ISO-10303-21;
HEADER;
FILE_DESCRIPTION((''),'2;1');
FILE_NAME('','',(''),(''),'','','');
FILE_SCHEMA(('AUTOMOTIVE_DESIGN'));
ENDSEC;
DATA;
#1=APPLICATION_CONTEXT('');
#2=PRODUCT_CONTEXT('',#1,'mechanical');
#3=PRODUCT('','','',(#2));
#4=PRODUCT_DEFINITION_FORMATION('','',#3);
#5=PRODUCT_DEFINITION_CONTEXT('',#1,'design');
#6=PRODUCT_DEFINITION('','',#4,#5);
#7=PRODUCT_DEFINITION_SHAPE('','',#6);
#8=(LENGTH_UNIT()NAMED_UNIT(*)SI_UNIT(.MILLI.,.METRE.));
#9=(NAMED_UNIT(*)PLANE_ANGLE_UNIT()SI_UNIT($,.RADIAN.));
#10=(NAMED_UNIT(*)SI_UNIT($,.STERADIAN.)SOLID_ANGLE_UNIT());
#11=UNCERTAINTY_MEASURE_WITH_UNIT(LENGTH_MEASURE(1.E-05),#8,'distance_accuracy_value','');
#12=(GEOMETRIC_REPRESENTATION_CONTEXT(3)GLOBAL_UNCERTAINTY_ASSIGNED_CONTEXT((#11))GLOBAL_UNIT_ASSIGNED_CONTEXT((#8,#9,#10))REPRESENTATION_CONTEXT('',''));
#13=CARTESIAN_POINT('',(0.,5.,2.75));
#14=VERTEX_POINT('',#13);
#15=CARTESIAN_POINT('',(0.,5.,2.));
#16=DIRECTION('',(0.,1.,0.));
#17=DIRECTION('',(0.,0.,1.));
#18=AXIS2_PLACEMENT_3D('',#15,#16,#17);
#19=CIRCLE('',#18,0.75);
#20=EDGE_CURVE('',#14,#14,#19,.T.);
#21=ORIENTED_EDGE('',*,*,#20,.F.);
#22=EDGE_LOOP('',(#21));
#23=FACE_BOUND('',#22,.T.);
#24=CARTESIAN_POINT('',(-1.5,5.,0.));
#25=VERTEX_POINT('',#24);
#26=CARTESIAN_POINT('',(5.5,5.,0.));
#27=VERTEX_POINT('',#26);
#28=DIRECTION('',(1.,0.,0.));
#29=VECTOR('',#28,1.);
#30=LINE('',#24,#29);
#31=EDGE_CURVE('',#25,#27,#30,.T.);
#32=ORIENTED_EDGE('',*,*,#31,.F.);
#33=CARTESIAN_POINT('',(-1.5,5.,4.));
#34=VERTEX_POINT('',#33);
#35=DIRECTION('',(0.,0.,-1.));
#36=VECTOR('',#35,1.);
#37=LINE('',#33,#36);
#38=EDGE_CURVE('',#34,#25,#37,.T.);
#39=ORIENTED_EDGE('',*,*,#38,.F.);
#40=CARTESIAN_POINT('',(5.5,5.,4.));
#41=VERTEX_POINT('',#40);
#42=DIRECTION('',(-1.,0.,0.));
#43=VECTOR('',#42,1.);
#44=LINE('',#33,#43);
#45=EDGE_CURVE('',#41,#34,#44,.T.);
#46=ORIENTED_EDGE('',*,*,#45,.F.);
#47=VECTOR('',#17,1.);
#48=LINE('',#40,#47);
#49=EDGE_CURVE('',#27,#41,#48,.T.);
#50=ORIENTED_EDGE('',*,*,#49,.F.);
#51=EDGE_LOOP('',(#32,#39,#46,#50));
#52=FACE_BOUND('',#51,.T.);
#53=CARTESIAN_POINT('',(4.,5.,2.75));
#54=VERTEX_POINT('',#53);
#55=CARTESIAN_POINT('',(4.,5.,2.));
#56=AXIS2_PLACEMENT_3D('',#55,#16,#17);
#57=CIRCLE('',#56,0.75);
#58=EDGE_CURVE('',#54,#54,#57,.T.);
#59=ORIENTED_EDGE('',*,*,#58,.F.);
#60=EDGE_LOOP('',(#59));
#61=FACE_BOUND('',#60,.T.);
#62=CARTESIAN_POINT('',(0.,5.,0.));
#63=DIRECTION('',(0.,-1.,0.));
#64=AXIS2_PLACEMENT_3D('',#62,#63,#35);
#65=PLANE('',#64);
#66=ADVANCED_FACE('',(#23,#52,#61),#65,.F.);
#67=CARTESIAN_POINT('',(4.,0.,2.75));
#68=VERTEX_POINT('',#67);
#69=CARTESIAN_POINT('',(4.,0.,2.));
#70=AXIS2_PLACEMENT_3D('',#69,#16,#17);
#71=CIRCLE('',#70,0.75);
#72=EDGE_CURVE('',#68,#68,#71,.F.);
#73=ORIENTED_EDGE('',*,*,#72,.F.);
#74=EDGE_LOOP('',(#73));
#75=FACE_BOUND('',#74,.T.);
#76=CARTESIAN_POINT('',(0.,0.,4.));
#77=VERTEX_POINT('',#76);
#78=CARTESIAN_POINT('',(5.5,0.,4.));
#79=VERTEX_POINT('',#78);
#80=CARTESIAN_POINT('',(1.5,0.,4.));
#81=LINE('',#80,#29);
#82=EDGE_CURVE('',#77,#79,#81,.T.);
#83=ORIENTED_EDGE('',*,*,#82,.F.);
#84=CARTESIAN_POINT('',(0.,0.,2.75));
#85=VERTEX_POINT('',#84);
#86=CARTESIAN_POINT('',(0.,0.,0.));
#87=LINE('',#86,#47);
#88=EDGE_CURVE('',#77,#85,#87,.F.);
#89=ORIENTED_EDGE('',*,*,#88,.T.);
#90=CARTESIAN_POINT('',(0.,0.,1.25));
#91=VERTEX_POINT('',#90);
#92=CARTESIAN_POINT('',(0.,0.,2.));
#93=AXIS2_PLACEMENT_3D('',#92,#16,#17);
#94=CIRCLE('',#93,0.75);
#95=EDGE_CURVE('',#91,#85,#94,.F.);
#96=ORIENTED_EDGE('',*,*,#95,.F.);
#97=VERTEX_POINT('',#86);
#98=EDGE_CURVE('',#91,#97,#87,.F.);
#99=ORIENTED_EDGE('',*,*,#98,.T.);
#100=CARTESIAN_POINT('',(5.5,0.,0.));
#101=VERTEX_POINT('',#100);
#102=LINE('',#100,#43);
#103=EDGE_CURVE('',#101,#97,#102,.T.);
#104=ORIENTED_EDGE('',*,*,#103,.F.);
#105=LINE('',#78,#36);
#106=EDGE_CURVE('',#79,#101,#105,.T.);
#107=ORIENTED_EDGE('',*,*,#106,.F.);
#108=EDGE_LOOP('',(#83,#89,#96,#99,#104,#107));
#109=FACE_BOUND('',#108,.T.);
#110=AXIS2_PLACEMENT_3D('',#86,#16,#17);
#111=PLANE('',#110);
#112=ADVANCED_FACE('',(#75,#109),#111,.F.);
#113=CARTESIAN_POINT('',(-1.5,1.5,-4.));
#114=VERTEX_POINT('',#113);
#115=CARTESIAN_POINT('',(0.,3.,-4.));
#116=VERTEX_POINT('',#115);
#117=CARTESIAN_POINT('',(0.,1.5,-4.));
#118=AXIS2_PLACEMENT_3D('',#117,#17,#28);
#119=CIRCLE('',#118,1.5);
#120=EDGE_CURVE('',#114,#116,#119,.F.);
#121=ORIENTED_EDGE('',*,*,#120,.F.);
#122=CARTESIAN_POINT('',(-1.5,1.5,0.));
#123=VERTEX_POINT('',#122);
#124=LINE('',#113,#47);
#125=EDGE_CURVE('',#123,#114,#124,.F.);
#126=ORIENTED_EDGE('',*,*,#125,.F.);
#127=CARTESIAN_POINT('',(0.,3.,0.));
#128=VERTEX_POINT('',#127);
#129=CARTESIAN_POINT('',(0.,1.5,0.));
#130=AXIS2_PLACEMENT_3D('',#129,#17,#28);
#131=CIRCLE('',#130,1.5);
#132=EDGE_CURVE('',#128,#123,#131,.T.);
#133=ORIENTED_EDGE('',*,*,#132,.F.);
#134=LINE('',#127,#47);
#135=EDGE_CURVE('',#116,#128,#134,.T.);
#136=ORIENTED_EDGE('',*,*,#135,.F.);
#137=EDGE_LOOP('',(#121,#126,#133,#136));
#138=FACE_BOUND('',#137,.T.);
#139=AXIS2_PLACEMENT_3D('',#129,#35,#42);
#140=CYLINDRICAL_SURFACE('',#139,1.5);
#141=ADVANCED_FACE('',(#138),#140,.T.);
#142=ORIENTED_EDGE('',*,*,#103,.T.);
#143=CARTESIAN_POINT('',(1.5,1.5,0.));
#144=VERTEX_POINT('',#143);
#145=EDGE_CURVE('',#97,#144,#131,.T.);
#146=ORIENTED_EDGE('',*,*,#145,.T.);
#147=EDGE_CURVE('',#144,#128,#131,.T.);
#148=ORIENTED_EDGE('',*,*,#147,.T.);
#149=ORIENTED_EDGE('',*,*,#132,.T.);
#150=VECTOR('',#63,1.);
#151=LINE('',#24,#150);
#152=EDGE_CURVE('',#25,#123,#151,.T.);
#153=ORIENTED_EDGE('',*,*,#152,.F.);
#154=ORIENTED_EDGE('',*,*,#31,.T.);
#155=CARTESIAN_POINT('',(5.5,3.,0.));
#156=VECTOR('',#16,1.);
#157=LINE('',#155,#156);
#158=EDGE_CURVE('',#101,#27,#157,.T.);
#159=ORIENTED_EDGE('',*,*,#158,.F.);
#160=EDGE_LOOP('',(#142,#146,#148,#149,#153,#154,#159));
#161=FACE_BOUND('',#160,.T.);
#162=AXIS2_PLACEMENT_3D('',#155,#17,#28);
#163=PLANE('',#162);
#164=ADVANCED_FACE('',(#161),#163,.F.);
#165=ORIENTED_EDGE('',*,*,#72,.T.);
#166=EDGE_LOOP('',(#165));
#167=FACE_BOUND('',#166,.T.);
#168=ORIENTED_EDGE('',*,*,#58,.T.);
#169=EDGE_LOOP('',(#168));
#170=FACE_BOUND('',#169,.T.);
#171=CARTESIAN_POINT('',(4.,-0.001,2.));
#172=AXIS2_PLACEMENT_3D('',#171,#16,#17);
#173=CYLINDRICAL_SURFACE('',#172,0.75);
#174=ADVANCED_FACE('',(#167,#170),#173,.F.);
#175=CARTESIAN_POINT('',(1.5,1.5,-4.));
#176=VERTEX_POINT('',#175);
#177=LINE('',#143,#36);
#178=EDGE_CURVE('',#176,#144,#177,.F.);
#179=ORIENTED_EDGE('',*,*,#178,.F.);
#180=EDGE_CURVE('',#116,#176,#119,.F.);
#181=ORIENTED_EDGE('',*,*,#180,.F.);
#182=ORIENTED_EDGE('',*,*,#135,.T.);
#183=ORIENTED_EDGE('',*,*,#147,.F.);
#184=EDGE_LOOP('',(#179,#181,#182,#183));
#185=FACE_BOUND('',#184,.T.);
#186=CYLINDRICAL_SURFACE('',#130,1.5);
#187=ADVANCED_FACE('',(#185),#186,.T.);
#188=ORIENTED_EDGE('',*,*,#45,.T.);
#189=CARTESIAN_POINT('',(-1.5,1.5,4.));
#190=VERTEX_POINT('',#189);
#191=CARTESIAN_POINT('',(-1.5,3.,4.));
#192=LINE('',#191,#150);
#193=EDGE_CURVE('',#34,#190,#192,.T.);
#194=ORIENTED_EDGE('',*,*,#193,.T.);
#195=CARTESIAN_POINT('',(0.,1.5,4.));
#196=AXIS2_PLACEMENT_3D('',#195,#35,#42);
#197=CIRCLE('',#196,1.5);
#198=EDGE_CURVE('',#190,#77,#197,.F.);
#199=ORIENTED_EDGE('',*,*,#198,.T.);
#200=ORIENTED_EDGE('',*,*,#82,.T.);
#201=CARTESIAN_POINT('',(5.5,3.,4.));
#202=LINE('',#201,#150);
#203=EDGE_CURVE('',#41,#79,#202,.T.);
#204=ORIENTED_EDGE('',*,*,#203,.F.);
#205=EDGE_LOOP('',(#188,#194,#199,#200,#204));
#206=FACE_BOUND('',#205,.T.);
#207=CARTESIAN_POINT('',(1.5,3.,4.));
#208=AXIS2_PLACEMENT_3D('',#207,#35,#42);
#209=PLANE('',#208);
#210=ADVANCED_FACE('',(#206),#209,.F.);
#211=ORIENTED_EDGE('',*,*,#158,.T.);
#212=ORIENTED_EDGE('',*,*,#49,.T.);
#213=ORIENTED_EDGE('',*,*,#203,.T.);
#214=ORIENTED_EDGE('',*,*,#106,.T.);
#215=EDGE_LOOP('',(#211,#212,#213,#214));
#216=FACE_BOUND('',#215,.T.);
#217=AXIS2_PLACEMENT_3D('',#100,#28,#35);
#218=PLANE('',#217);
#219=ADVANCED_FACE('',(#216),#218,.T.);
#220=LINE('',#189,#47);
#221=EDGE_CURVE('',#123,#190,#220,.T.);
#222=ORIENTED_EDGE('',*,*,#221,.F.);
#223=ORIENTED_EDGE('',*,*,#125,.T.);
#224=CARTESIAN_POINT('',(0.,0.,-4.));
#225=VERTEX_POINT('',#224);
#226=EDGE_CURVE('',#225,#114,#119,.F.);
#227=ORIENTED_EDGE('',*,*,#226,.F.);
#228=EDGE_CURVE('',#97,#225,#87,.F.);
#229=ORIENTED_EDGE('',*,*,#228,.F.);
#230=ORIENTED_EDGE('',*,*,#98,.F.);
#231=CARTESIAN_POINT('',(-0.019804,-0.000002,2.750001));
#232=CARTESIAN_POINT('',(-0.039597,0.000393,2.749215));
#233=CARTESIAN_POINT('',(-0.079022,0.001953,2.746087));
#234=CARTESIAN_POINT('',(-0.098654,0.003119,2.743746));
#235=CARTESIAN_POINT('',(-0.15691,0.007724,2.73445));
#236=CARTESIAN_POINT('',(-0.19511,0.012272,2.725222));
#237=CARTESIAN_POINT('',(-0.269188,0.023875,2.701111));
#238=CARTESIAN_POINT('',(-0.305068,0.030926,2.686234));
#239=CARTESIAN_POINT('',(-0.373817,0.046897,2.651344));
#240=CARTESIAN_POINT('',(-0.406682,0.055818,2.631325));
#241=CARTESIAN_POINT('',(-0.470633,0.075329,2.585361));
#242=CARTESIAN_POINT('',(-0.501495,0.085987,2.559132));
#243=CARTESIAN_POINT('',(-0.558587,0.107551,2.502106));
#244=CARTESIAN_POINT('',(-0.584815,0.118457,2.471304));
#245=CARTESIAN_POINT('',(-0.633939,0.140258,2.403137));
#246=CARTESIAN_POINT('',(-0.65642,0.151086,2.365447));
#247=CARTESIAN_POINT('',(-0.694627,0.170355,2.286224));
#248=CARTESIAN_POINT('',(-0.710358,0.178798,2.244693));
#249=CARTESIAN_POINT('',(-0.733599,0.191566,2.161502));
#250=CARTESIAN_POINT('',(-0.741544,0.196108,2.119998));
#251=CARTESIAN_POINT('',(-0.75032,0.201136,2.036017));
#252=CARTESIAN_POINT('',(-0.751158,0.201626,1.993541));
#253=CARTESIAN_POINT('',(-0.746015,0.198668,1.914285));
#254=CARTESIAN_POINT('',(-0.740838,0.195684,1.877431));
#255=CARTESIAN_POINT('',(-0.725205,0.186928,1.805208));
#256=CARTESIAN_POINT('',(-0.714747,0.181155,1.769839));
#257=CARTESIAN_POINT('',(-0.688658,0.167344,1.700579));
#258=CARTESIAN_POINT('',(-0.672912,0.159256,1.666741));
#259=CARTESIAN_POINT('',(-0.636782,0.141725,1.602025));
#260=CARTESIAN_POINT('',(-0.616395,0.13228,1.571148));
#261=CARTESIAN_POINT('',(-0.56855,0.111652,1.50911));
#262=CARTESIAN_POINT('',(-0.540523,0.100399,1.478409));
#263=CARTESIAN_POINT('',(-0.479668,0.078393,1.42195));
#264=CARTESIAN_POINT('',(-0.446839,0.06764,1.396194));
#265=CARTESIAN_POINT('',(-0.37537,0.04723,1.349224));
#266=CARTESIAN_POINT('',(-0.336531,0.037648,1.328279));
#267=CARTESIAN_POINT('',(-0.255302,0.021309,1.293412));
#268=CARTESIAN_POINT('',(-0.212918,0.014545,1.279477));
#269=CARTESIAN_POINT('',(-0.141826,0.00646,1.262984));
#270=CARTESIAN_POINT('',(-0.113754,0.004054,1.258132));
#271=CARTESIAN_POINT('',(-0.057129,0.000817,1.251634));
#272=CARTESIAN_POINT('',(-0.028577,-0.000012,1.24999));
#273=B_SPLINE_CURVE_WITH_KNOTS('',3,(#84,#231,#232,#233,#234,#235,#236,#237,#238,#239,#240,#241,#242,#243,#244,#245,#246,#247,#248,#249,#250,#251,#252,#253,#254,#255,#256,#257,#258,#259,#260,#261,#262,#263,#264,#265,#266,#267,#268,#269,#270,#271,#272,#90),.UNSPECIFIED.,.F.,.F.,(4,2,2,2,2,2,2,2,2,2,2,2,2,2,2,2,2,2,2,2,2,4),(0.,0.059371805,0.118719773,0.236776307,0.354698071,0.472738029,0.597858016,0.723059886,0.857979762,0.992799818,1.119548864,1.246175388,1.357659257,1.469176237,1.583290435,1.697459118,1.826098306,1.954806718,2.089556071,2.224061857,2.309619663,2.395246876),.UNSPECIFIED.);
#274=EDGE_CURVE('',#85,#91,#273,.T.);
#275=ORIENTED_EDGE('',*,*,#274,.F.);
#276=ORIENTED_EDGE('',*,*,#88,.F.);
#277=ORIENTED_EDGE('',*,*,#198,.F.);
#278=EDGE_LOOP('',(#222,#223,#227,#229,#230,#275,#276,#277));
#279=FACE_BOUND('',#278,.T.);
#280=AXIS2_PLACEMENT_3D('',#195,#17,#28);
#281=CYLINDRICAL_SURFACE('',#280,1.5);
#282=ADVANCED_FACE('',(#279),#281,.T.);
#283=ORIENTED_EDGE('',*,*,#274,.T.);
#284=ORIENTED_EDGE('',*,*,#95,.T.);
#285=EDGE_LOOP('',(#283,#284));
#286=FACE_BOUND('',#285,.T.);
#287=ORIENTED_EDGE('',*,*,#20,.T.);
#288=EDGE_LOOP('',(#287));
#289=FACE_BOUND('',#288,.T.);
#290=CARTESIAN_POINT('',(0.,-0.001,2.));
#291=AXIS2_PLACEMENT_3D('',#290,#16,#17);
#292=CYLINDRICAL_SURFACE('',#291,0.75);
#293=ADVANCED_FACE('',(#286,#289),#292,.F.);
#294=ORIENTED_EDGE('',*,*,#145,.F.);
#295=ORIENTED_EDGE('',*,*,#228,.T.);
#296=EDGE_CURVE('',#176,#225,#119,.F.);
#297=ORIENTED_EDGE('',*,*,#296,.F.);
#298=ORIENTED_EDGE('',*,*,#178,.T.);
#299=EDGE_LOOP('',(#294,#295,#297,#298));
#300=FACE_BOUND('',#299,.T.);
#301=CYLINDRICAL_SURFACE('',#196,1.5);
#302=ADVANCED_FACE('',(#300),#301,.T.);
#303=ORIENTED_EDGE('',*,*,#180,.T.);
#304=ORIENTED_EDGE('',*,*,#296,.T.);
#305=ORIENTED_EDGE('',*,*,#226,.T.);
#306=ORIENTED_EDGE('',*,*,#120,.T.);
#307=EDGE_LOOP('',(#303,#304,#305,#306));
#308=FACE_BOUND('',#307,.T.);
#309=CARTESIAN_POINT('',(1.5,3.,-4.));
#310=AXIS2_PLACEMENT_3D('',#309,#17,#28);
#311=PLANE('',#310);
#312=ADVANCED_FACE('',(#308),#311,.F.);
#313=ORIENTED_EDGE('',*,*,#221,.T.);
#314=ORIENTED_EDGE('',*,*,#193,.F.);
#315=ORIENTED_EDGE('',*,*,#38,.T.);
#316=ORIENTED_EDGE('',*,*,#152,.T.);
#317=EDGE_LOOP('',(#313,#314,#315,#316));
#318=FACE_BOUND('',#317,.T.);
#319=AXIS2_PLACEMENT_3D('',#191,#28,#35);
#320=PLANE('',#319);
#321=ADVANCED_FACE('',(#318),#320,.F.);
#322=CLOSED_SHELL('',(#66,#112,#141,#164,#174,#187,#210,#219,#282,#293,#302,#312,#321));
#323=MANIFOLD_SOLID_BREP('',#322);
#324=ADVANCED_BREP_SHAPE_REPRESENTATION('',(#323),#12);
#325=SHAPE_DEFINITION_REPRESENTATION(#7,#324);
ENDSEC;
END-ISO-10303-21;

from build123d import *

# Parameters (mm, degrees)
SKETCH1_W           = 3
SKETCH1_H           = 8
BOSS_EXTRUDE1_DEPTH = 3
SKETCH2_W           = 4
SKETCH2_H           = 3
BOSS_EXTRUDE2_DEPTH = 4
SKETCH4_W           = 7
SKETCH4_H           = 4
BOSS_EXTRUDE3_DEPTH = 2
CUT_EXTRUDE2_REACH  = 10.441
SKETCH5_R           = 0.75
FILLET4_R           = 1.5


with BuildPart() as part:
    # Sketch1 → Boss-Extrude1 (new body)
    with BuildSketch(Plane(origin=(0, 0, 0), x_dir=(1, 0, 0), z_dir=(0, 1, 0))):
        Rectangle(SKETCH1_W, SKETCH1_H)
    extrude(amount=BOSS_EXTRUDE1_DEPTH)

    # Sketch2 → Boss-Extrude2 (add)
    with BuildSketch(Plane(origin=(1.5, 0, 0), x_dir=(0, 0, -1), z_dir=(1, 0, 0))):
        with Locations((-2, 1.5)):
            Rectangle(SKETCH2_W, SKETCH2_H)
    extrude(amount=BOSS_EXTRUDE2_DEPTH)

    # Sketch4 → Boss-Extrude3 (add)
    with BuildSketch(Plane(origin=(0, 3, 0), x_dir=(-1, 0, 0), z_dir=(0, -1, 0))):
        with Locations((-2, -2)):
            Rectangle(SKETCH4_W, SKETCH4_H)
    extrude(amount=-BOSS_EXTRUDE3_DEPTH)

    # Sketch5 → Cut-Extrude2 (cut, up to next)
    with BuildSketch(Plane(origin=(0, 5, 0), x_dir=(1, 0, 0), z_dir=(0, 1, 0)), mode=Mode.PRIVATE) as cut_extrude2_sk1:
        with Locations(Location((0, -2, 0), (0, 0, 270))):
            Circle(SKETCH5_R)
    cut_extrude2_tool1 = extrude(cut_extrude2_sk1.sketch, amount=-CUT_EXTRUDE2_REACH, mode=Mode.PRIVATE) & part.part
    # Sketch5 → Cut-Extrude2 (cut, up to next)
    with BuildSketch(Plane(origin=(0, 5, 0), x_dir=(1, 0, 0), z_dir=(0, 1, 0)), mode=Mode.PRIVATE) as cut_extrude2_sk2:
        with Locations(Location((4, -2, 0), (0, 0, 270))):
            Circle(SKETCH5_R)
    cut_extrude2_tool2 = extrude(cut_extrude2_sk2.sketch, amount=-CUT_EXTRUDE2_REACH, mode=Mode.PRIVATE) & part.part
    add(cut_extrude2_tool1.solids().sort_by_distance((0, 5, 2))[0], mode=Mode.SUBTRACT)
    add(cut_extrude2_tool2.solids().sort_by_distance((4, 5, 2))[0], mode=Mode.SUBTRACT)

    # Fillet4
    # the kernel refuses this fillet: 1.5 mm, written as the material it takes off along each edge
    with BuildSketch(Plane(origin=(1.5, 0, -7.75), x_dir=(-1, 0, 0), z_dir=(0, 0, 1)), Plane(origin=(1.5, 3, -7.75), x_dir=(0, -1, 0), z_dir=(0, 0, 1)), Plane(origin=(-1.5, 3, 0), x_dir=(0, -1, 0), z_dir=(0, 0, -1))) as fillet4_piece_1:
        with BuildLine():
            CenterArc((FILLET4_R, -FILLET4_R), FILLET4_R, 90, 90)
            Line((0, -FILLET4_R), (0, 0))
            Line((0, 0), (FILLET4_R, 0))
        make_face()
    extrude(amount=7.75, mode=Mode.SUBTRACT)
    with BuildSketch(Plane(origin=(-1.5, 0, 7.75), x_dir=(1, 0, 0), z_dir=(0, 0, -1))) as fillet4_piece_2:
        with BuildLine():
            CenterArc((FILLET4_R, -FILLET4_R), FILLET4_R, 90, 90)
            Line((0, -FILLET4_R), (0, 0))
            Line((0, 0), (FILLET4_R, 0))
        make_face()
    extrude(amount=15.5, mode=Mode.SUBTRACT)


solid = part.part
